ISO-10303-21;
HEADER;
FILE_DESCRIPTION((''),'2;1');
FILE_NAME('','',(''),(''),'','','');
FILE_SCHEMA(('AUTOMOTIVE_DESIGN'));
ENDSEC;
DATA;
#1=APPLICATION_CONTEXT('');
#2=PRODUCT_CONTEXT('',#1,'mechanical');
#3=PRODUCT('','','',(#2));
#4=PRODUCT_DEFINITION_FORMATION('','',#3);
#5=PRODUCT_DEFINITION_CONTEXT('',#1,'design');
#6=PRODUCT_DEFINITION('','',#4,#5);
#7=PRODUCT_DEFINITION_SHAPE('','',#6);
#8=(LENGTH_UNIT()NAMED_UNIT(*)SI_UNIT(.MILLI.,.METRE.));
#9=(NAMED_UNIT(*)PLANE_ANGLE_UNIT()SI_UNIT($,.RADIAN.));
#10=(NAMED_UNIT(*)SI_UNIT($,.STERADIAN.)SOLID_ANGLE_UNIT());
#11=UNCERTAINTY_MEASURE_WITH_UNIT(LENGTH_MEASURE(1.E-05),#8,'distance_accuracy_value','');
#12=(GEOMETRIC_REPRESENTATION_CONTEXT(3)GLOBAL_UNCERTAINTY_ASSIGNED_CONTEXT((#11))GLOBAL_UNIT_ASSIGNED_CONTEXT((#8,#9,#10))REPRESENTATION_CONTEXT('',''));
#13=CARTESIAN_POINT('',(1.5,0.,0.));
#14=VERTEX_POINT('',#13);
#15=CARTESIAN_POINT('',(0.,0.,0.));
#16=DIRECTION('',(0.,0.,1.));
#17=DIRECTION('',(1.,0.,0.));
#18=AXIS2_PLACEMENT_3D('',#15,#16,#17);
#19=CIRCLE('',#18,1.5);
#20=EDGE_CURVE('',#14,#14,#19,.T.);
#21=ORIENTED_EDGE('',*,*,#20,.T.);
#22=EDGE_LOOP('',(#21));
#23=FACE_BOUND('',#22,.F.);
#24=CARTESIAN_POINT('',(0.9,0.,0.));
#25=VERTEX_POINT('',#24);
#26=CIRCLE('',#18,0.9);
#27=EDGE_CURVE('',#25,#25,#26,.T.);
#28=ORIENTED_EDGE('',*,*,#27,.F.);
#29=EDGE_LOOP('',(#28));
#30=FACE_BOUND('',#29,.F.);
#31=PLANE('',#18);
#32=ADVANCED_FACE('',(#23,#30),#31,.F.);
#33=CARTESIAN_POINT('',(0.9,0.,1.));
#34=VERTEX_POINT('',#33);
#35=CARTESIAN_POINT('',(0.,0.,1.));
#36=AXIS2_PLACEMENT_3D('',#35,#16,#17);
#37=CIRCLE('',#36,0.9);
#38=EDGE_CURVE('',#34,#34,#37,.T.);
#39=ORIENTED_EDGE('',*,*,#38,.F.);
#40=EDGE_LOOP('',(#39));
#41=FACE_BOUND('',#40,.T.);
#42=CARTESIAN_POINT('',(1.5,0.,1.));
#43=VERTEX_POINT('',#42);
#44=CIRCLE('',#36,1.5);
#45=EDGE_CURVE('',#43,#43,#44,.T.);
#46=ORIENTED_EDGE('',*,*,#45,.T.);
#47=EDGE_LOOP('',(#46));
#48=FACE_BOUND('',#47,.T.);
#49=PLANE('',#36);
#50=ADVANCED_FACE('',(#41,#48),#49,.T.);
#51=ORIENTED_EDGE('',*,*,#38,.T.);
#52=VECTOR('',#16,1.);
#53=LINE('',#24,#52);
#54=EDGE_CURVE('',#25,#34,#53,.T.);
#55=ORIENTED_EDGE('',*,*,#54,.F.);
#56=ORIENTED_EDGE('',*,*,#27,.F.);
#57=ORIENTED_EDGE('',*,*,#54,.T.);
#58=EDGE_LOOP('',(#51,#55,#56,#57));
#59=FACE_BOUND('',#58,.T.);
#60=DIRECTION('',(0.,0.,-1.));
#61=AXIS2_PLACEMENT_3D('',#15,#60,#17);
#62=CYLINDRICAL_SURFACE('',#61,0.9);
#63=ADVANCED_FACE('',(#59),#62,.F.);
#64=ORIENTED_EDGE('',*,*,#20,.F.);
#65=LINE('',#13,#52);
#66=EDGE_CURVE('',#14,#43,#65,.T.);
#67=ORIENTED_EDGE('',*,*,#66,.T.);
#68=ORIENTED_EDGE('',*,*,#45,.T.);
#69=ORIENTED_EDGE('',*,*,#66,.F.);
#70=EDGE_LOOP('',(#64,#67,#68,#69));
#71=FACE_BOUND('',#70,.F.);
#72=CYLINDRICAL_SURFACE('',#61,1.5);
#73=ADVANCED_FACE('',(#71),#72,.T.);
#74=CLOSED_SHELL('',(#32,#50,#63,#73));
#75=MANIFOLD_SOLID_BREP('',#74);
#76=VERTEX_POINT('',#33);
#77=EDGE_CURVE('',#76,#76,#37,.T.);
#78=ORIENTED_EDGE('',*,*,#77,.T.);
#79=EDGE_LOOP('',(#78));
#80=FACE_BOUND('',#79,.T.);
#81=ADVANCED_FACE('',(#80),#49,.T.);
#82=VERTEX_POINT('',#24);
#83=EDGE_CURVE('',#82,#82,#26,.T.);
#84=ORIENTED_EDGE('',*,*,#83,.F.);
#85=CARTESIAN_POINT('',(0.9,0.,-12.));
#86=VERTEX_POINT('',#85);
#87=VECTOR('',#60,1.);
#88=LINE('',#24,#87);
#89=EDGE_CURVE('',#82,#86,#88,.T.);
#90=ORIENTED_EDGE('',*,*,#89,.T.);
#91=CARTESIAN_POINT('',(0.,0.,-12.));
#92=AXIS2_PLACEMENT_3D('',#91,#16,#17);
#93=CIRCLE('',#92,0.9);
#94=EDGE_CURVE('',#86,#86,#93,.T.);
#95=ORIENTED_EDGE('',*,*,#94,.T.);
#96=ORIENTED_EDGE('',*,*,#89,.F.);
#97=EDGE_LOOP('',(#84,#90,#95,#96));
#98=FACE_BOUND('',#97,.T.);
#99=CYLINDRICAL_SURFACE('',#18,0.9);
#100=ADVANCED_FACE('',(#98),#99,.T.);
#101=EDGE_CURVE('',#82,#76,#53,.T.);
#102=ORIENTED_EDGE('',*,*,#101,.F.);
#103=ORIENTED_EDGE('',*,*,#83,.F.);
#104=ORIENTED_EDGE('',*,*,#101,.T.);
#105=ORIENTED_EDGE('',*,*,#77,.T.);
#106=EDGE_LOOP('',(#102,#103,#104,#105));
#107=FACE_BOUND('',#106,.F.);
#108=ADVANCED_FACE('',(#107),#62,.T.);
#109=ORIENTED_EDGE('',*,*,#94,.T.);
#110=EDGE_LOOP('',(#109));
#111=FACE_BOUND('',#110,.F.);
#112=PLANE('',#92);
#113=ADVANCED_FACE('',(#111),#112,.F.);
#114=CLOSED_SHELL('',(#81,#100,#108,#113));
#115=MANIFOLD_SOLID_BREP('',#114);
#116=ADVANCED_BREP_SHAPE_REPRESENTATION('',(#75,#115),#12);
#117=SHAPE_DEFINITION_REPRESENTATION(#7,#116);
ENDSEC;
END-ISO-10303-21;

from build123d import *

# Parameters (mm, degrees)
F0_R     = 0.9
F1_DEPTH = 12
F0_R_2   = 1.5
F2_DEPTH = 1
F3_DEPTH = 1


with BuildPart() as f1:
    # F0 (on Top) → F1 (new body)
    with BuildSketch(Plane.XY):
        Circle(F0_R)
    extrude(amount=-F1_DEPTH)

    # F3 (add, through all): a face of the model
    f3_faces = [f1.faces().sort_by_distance(p)[0] for p in [
        (0, 0, 0),
    ]]
    extrude(f3_faces, amount=F3_DEPTH)


with BuildPart() as f2:
    # F0 (on Top) → F2 (new body)
    with BuildSketch(Plane.XY):
        Circle(F0_R_2)
        Circle(F0_R, mode=Mode.SUBTRACT)
    extrude(amount=F2_DEPTH)


solid = Compound([f1.part, f2.part])
